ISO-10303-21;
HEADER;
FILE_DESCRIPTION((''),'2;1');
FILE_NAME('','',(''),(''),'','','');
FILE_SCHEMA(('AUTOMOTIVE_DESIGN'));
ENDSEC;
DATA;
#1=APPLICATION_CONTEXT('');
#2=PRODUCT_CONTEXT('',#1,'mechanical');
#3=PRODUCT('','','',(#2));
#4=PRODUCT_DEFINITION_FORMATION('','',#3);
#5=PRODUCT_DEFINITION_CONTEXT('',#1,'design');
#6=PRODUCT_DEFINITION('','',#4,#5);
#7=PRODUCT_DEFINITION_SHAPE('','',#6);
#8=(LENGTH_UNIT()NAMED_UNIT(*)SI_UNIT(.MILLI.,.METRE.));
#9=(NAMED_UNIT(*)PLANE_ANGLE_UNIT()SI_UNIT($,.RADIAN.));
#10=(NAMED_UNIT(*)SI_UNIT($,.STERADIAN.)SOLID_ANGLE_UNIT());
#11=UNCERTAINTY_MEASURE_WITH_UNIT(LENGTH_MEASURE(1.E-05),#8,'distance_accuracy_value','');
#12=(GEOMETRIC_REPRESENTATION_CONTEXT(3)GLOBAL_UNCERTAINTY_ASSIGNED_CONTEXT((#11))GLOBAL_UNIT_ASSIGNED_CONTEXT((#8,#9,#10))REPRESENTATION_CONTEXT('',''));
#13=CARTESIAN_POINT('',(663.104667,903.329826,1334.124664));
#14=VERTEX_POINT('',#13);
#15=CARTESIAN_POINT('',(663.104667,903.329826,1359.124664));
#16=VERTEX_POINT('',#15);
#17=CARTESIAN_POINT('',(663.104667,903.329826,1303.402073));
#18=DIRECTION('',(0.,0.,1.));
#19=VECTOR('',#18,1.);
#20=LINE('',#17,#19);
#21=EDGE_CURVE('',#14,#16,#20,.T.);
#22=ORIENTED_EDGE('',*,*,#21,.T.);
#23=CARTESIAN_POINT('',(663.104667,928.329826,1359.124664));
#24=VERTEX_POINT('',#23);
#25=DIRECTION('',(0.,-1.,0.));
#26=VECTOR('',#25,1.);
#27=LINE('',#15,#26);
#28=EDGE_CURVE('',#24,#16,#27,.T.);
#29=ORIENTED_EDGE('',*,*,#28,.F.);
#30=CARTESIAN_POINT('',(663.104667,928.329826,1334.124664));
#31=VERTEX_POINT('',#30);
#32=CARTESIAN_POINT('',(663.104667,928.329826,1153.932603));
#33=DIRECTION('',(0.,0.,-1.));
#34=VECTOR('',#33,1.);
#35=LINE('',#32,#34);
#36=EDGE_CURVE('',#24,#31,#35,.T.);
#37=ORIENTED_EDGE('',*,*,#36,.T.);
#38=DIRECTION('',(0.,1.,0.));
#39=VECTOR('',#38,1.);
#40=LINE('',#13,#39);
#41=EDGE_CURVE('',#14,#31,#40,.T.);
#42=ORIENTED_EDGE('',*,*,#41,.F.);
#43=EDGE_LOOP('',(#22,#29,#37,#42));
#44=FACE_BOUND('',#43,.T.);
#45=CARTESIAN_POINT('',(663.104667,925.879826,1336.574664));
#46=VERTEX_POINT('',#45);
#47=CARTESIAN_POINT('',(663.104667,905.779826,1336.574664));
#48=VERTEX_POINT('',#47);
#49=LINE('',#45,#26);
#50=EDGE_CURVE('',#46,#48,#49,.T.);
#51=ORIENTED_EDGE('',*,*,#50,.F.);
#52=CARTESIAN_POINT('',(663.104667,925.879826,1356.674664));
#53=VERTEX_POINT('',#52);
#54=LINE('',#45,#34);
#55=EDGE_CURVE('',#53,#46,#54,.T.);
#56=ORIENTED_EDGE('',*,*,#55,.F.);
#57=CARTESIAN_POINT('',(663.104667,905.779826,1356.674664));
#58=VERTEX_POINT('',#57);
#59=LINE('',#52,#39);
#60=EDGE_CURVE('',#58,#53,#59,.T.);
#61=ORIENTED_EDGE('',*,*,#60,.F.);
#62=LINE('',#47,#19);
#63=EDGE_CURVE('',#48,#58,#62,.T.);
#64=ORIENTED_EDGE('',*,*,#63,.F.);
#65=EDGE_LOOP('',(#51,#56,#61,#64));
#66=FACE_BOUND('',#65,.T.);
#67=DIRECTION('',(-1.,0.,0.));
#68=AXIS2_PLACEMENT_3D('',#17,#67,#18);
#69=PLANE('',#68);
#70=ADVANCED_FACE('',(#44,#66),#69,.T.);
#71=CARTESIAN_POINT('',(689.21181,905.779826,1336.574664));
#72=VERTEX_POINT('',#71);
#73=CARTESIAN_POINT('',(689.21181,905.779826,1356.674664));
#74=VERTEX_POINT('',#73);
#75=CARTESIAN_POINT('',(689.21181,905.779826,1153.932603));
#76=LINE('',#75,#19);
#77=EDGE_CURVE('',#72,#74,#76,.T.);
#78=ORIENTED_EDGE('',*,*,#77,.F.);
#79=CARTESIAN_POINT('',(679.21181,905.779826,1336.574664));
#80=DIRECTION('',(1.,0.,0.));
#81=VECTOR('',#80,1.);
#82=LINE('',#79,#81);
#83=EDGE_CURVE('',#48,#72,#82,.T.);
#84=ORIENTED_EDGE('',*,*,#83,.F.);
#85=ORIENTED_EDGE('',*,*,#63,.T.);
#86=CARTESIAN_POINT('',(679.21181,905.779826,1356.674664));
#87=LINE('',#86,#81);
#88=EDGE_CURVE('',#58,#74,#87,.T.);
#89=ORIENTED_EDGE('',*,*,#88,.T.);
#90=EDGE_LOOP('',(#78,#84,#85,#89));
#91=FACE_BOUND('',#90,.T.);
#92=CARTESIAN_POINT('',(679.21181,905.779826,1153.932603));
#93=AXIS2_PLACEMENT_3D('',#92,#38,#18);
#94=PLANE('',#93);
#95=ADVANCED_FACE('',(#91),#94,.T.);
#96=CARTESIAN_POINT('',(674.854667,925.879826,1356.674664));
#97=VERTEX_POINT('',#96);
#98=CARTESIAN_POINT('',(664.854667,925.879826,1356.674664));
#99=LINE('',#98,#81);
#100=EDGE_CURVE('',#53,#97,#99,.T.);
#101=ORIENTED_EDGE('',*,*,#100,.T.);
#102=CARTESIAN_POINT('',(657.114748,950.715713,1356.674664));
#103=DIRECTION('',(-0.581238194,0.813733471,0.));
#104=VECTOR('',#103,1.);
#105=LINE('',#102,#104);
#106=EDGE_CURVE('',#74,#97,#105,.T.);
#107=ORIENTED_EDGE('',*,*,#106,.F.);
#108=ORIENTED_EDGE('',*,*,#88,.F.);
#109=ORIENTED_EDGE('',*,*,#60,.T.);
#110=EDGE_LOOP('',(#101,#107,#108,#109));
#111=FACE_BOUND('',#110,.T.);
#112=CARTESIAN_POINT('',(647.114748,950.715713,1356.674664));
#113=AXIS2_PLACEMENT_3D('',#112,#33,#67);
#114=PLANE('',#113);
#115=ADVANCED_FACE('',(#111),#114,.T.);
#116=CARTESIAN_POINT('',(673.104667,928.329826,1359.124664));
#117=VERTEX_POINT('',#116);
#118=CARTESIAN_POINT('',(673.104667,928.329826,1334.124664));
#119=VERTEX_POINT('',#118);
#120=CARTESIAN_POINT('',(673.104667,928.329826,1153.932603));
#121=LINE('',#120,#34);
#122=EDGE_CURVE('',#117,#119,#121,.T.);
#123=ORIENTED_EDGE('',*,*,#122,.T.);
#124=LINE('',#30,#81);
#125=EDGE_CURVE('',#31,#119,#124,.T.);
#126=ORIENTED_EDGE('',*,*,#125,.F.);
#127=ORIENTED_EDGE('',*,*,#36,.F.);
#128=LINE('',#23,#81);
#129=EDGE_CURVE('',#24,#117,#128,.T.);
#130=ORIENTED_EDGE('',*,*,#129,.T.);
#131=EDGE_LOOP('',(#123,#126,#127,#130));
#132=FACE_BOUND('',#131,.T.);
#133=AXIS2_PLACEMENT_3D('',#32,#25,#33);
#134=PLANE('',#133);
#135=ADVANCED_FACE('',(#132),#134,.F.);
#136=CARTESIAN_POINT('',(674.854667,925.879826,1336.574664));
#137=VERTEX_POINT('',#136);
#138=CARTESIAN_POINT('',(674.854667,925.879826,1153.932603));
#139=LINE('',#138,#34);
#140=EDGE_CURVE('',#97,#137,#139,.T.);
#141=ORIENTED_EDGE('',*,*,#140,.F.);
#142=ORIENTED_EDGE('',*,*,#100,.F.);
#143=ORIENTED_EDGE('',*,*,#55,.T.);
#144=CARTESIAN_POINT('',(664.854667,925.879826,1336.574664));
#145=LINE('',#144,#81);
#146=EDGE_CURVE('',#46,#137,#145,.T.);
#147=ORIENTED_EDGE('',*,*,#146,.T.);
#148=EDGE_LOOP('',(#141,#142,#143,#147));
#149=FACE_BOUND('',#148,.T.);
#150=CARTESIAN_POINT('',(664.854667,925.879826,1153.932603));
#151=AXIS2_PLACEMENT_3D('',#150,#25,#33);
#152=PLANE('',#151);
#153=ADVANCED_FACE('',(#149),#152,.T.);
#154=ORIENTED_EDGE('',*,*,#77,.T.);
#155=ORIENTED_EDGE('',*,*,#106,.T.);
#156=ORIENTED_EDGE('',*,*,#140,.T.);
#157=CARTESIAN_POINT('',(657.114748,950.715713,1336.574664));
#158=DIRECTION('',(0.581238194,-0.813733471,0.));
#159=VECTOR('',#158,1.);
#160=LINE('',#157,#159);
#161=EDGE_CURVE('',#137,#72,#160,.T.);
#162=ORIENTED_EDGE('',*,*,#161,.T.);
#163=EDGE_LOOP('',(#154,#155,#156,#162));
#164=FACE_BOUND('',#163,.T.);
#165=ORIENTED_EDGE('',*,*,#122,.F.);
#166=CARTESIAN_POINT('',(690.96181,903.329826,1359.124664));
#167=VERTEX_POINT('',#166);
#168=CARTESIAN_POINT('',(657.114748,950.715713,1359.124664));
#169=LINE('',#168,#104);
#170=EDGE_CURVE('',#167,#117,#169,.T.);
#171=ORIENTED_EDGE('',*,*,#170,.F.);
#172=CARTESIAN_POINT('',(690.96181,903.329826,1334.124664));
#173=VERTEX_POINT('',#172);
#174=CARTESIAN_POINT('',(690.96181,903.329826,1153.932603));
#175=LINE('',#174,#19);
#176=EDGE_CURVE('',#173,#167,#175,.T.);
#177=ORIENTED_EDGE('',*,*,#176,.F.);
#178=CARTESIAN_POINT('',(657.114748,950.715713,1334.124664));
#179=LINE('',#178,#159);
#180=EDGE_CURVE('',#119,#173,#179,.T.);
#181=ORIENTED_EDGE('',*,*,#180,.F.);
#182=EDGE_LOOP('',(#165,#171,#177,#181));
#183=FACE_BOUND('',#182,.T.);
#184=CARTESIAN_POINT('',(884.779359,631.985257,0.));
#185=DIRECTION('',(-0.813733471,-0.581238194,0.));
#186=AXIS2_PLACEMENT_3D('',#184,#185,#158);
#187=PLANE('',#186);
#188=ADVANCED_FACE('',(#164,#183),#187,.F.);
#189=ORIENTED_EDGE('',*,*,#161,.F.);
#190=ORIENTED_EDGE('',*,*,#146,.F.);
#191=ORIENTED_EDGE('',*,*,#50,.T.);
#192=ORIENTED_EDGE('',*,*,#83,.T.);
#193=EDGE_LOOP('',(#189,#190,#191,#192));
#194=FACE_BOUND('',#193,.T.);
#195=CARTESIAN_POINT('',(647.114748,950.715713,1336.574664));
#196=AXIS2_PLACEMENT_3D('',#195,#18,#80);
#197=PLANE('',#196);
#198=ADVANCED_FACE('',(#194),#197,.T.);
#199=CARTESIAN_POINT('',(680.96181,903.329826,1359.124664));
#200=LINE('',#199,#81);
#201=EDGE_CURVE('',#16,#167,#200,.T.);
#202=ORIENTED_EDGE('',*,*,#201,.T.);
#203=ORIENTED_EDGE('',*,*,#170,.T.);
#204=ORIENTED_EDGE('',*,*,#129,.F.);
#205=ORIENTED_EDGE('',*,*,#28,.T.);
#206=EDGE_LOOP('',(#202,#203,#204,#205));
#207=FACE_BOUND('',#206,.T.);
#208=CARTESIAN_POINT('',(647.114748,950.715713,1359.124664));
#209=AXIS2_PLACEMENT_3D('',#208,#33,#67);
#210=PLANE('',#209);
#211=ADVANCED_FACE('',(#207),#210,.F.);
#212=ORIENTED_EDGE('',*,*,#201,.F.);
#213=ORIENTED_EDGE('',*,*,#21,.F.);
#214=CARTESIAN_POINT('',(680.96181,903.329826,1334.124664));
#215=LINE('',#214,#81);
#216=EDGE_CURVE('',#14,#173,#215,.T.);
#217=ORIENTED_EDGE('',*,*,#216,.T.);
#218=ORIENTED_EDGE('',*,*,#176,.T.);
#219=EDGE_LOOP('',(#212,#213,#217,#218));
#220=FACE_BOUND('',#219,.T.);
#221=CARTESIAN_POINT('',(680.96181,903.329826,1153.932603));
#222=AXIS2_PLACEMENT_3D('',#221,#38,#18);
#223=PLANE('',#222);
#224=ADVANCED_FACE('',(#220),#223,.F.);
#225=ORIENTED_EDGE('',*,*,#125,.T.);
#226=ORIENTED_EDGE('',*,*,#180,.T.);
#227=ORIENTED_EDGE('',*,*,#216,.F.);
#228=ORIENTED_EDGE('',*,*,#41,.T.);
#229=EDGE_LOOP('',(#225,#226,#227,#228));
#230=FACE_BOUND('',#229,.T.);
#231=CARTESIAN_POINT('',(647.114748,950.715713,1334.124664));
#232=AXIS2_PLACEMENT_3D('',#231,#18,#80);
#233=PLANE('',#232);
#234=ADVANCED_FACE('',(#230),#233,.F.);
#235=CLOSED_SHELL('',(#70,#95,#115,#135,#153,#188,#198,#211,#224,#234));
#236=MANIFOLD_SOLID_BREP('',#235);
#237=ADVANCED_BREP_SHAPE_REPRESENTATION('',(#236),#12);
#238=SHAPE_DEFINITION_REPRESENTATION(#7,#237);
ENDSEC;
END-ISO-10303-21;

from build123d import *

# Parameters (mm, degrees)
BOSS_EXTRUDE1_START       = 663.104666785
BOSS_EXTRUDE1_OUTLINE_W   = 25
BOSS_EXTRUDE1_OUTLINE_H   = 25
BOSS_EXTRUDE1_OUTLINE_W_2 = 20.1
BOSS_EXTRUDE1_OUTLINE_H_2 = 20.1
BOSS_EXTRUDE1_DEPTH       = 27.857142858
BOSS_EXTRUDE1_START_2     = 1064
BOSS_EXTRUDE1_2_OUTLINE_W = 39
BOSS_EXTRUDE1_2_OUTLINE_H = 25
BOSS_EXTRUDE1_2_DEPTH     = 15.171213372
BOSS_EXTRUDE1_START_3     = 1087.308548084
BOSS_EXTRUDE1_3_OUTLINE_W = 39
BOSS_EXTRUDE1_3_OUTLINE_H = 25
BOSS_EXTRUDE1_3_DEPTH     = 15.691451916
BOSS_EXTRUDE2_DEPTH       = 25
CUT_EXTRUDE2_REACH        = 1648.145
SKETCH7_W                 = 20.1
SKETCH7_H                 = 20.1


with BuildPart() as part:
    # Boss-Extrude1: read off the stored shape, not the designer's step
    # Boss-Extrude1 outline → Boss-Extrude1 (new body)
    with BuildSketch(Plane(origin=(0, 0, 0), x_dir=(0, 0, -1), z_dir=(1, 0, 0)).offset(BOSS_EXTRUDE1_START)):
        with Locations((-1346.624663727, 915.829825752)):
            Rectangle(BOSS_EXTRUDE1_OUTLINE_W, BOSS_EXTRUDE1_OUTLINE_H)
        with Locations((-1346.624663727, 915.829825752)):
            Rectangle(BOSS_EXTRUDE1_OUTLINE_W_2, BOSS_EXTRUDE1_OUTLINE_H_2, mode=Mode.SUBTRACT)
    extrude(amount=BOSS_EXTRUDE1_DEPTH)

    # Boss-Extrude1 2 outline → Boss-Extrude1 2 (cut)
    with BuildSketch(Plane(origin=(0, 0, 0), x_dir=(0.5812381937190959, -0.8137334712067352, 0), z_dir=(0.8137334712067352, 0.5812381937190961, 0)).offset(BOSS_EXTRUDE1_START_2)):
        with Locations((-351.5, -1346.624663727)):
            Rectangle(BOSS_EXTRUDE1_2_OUTLINE_W, BOSS_EXTRUDE1_2_OUTLINE_H)
    extrude(amount=BOSS_EXTRUDE1_2_DEPTH, mode=Mode.SUBTRACT)

    # Boss-Extrude1 3 outline → Boss-Extrude1 3 (cut)
    with BuildSketch(Plane(origin=(0, 0, 0), x_dir=(0.5812381937190959, -0.8137334712067352, 0), z_dir=(0.8137334712067352, 0.5812381937190961, 0)).offset(BOSS_EXTRUDE1_START_3)):
        with Locations((-351.5, -1346.624663727)):
            Rectangle(BOSS_EXTRUDE1_3_OUTLINE_W, BOSS_EXTRUDE1_3_OUTLINE_H)
    extrude(amount=BOSS_EXTRUDE1_3_DEPTH, mode=Mode.SUBTRACT)

    # Sketch5 → Boss-Extrude2 (add)
    with BuildSketch(Plane.XY.offset(1359.124663727)):
        Polygon((663.104666785, 928.329825752), (680.961809643, 903.329825752), (663.104666785, 903.329825752), align=None)
    extrude(amount=-BOSS_EXTRUDE2_DEPTH)

    # Sketch7 → Cut-Extrude2 (cut, up to next)
    with BuildSketch(Plane.ZY.offset(-663.104666785), mode=Mode.PRIVATE) as cut_extrude2_sk1:
        with Locations((1346.624663727, 915.829825752)):
            Rectangle(SKETCH7_W, SKETCH7_H)
    cut_extrude2_tool1 = extrude(cut_extrude2_sk1.sketch, amount=-CUT_EXTRUDE2_REACH, mode=Mode.PRIVATE) & part.part
    add(cut_extrude2_tool1.solids().sort_by_distance((663.104667, 915.829826, 1346.624664))[0], mode=Mode.SUBTRACT)


solid = part.part
